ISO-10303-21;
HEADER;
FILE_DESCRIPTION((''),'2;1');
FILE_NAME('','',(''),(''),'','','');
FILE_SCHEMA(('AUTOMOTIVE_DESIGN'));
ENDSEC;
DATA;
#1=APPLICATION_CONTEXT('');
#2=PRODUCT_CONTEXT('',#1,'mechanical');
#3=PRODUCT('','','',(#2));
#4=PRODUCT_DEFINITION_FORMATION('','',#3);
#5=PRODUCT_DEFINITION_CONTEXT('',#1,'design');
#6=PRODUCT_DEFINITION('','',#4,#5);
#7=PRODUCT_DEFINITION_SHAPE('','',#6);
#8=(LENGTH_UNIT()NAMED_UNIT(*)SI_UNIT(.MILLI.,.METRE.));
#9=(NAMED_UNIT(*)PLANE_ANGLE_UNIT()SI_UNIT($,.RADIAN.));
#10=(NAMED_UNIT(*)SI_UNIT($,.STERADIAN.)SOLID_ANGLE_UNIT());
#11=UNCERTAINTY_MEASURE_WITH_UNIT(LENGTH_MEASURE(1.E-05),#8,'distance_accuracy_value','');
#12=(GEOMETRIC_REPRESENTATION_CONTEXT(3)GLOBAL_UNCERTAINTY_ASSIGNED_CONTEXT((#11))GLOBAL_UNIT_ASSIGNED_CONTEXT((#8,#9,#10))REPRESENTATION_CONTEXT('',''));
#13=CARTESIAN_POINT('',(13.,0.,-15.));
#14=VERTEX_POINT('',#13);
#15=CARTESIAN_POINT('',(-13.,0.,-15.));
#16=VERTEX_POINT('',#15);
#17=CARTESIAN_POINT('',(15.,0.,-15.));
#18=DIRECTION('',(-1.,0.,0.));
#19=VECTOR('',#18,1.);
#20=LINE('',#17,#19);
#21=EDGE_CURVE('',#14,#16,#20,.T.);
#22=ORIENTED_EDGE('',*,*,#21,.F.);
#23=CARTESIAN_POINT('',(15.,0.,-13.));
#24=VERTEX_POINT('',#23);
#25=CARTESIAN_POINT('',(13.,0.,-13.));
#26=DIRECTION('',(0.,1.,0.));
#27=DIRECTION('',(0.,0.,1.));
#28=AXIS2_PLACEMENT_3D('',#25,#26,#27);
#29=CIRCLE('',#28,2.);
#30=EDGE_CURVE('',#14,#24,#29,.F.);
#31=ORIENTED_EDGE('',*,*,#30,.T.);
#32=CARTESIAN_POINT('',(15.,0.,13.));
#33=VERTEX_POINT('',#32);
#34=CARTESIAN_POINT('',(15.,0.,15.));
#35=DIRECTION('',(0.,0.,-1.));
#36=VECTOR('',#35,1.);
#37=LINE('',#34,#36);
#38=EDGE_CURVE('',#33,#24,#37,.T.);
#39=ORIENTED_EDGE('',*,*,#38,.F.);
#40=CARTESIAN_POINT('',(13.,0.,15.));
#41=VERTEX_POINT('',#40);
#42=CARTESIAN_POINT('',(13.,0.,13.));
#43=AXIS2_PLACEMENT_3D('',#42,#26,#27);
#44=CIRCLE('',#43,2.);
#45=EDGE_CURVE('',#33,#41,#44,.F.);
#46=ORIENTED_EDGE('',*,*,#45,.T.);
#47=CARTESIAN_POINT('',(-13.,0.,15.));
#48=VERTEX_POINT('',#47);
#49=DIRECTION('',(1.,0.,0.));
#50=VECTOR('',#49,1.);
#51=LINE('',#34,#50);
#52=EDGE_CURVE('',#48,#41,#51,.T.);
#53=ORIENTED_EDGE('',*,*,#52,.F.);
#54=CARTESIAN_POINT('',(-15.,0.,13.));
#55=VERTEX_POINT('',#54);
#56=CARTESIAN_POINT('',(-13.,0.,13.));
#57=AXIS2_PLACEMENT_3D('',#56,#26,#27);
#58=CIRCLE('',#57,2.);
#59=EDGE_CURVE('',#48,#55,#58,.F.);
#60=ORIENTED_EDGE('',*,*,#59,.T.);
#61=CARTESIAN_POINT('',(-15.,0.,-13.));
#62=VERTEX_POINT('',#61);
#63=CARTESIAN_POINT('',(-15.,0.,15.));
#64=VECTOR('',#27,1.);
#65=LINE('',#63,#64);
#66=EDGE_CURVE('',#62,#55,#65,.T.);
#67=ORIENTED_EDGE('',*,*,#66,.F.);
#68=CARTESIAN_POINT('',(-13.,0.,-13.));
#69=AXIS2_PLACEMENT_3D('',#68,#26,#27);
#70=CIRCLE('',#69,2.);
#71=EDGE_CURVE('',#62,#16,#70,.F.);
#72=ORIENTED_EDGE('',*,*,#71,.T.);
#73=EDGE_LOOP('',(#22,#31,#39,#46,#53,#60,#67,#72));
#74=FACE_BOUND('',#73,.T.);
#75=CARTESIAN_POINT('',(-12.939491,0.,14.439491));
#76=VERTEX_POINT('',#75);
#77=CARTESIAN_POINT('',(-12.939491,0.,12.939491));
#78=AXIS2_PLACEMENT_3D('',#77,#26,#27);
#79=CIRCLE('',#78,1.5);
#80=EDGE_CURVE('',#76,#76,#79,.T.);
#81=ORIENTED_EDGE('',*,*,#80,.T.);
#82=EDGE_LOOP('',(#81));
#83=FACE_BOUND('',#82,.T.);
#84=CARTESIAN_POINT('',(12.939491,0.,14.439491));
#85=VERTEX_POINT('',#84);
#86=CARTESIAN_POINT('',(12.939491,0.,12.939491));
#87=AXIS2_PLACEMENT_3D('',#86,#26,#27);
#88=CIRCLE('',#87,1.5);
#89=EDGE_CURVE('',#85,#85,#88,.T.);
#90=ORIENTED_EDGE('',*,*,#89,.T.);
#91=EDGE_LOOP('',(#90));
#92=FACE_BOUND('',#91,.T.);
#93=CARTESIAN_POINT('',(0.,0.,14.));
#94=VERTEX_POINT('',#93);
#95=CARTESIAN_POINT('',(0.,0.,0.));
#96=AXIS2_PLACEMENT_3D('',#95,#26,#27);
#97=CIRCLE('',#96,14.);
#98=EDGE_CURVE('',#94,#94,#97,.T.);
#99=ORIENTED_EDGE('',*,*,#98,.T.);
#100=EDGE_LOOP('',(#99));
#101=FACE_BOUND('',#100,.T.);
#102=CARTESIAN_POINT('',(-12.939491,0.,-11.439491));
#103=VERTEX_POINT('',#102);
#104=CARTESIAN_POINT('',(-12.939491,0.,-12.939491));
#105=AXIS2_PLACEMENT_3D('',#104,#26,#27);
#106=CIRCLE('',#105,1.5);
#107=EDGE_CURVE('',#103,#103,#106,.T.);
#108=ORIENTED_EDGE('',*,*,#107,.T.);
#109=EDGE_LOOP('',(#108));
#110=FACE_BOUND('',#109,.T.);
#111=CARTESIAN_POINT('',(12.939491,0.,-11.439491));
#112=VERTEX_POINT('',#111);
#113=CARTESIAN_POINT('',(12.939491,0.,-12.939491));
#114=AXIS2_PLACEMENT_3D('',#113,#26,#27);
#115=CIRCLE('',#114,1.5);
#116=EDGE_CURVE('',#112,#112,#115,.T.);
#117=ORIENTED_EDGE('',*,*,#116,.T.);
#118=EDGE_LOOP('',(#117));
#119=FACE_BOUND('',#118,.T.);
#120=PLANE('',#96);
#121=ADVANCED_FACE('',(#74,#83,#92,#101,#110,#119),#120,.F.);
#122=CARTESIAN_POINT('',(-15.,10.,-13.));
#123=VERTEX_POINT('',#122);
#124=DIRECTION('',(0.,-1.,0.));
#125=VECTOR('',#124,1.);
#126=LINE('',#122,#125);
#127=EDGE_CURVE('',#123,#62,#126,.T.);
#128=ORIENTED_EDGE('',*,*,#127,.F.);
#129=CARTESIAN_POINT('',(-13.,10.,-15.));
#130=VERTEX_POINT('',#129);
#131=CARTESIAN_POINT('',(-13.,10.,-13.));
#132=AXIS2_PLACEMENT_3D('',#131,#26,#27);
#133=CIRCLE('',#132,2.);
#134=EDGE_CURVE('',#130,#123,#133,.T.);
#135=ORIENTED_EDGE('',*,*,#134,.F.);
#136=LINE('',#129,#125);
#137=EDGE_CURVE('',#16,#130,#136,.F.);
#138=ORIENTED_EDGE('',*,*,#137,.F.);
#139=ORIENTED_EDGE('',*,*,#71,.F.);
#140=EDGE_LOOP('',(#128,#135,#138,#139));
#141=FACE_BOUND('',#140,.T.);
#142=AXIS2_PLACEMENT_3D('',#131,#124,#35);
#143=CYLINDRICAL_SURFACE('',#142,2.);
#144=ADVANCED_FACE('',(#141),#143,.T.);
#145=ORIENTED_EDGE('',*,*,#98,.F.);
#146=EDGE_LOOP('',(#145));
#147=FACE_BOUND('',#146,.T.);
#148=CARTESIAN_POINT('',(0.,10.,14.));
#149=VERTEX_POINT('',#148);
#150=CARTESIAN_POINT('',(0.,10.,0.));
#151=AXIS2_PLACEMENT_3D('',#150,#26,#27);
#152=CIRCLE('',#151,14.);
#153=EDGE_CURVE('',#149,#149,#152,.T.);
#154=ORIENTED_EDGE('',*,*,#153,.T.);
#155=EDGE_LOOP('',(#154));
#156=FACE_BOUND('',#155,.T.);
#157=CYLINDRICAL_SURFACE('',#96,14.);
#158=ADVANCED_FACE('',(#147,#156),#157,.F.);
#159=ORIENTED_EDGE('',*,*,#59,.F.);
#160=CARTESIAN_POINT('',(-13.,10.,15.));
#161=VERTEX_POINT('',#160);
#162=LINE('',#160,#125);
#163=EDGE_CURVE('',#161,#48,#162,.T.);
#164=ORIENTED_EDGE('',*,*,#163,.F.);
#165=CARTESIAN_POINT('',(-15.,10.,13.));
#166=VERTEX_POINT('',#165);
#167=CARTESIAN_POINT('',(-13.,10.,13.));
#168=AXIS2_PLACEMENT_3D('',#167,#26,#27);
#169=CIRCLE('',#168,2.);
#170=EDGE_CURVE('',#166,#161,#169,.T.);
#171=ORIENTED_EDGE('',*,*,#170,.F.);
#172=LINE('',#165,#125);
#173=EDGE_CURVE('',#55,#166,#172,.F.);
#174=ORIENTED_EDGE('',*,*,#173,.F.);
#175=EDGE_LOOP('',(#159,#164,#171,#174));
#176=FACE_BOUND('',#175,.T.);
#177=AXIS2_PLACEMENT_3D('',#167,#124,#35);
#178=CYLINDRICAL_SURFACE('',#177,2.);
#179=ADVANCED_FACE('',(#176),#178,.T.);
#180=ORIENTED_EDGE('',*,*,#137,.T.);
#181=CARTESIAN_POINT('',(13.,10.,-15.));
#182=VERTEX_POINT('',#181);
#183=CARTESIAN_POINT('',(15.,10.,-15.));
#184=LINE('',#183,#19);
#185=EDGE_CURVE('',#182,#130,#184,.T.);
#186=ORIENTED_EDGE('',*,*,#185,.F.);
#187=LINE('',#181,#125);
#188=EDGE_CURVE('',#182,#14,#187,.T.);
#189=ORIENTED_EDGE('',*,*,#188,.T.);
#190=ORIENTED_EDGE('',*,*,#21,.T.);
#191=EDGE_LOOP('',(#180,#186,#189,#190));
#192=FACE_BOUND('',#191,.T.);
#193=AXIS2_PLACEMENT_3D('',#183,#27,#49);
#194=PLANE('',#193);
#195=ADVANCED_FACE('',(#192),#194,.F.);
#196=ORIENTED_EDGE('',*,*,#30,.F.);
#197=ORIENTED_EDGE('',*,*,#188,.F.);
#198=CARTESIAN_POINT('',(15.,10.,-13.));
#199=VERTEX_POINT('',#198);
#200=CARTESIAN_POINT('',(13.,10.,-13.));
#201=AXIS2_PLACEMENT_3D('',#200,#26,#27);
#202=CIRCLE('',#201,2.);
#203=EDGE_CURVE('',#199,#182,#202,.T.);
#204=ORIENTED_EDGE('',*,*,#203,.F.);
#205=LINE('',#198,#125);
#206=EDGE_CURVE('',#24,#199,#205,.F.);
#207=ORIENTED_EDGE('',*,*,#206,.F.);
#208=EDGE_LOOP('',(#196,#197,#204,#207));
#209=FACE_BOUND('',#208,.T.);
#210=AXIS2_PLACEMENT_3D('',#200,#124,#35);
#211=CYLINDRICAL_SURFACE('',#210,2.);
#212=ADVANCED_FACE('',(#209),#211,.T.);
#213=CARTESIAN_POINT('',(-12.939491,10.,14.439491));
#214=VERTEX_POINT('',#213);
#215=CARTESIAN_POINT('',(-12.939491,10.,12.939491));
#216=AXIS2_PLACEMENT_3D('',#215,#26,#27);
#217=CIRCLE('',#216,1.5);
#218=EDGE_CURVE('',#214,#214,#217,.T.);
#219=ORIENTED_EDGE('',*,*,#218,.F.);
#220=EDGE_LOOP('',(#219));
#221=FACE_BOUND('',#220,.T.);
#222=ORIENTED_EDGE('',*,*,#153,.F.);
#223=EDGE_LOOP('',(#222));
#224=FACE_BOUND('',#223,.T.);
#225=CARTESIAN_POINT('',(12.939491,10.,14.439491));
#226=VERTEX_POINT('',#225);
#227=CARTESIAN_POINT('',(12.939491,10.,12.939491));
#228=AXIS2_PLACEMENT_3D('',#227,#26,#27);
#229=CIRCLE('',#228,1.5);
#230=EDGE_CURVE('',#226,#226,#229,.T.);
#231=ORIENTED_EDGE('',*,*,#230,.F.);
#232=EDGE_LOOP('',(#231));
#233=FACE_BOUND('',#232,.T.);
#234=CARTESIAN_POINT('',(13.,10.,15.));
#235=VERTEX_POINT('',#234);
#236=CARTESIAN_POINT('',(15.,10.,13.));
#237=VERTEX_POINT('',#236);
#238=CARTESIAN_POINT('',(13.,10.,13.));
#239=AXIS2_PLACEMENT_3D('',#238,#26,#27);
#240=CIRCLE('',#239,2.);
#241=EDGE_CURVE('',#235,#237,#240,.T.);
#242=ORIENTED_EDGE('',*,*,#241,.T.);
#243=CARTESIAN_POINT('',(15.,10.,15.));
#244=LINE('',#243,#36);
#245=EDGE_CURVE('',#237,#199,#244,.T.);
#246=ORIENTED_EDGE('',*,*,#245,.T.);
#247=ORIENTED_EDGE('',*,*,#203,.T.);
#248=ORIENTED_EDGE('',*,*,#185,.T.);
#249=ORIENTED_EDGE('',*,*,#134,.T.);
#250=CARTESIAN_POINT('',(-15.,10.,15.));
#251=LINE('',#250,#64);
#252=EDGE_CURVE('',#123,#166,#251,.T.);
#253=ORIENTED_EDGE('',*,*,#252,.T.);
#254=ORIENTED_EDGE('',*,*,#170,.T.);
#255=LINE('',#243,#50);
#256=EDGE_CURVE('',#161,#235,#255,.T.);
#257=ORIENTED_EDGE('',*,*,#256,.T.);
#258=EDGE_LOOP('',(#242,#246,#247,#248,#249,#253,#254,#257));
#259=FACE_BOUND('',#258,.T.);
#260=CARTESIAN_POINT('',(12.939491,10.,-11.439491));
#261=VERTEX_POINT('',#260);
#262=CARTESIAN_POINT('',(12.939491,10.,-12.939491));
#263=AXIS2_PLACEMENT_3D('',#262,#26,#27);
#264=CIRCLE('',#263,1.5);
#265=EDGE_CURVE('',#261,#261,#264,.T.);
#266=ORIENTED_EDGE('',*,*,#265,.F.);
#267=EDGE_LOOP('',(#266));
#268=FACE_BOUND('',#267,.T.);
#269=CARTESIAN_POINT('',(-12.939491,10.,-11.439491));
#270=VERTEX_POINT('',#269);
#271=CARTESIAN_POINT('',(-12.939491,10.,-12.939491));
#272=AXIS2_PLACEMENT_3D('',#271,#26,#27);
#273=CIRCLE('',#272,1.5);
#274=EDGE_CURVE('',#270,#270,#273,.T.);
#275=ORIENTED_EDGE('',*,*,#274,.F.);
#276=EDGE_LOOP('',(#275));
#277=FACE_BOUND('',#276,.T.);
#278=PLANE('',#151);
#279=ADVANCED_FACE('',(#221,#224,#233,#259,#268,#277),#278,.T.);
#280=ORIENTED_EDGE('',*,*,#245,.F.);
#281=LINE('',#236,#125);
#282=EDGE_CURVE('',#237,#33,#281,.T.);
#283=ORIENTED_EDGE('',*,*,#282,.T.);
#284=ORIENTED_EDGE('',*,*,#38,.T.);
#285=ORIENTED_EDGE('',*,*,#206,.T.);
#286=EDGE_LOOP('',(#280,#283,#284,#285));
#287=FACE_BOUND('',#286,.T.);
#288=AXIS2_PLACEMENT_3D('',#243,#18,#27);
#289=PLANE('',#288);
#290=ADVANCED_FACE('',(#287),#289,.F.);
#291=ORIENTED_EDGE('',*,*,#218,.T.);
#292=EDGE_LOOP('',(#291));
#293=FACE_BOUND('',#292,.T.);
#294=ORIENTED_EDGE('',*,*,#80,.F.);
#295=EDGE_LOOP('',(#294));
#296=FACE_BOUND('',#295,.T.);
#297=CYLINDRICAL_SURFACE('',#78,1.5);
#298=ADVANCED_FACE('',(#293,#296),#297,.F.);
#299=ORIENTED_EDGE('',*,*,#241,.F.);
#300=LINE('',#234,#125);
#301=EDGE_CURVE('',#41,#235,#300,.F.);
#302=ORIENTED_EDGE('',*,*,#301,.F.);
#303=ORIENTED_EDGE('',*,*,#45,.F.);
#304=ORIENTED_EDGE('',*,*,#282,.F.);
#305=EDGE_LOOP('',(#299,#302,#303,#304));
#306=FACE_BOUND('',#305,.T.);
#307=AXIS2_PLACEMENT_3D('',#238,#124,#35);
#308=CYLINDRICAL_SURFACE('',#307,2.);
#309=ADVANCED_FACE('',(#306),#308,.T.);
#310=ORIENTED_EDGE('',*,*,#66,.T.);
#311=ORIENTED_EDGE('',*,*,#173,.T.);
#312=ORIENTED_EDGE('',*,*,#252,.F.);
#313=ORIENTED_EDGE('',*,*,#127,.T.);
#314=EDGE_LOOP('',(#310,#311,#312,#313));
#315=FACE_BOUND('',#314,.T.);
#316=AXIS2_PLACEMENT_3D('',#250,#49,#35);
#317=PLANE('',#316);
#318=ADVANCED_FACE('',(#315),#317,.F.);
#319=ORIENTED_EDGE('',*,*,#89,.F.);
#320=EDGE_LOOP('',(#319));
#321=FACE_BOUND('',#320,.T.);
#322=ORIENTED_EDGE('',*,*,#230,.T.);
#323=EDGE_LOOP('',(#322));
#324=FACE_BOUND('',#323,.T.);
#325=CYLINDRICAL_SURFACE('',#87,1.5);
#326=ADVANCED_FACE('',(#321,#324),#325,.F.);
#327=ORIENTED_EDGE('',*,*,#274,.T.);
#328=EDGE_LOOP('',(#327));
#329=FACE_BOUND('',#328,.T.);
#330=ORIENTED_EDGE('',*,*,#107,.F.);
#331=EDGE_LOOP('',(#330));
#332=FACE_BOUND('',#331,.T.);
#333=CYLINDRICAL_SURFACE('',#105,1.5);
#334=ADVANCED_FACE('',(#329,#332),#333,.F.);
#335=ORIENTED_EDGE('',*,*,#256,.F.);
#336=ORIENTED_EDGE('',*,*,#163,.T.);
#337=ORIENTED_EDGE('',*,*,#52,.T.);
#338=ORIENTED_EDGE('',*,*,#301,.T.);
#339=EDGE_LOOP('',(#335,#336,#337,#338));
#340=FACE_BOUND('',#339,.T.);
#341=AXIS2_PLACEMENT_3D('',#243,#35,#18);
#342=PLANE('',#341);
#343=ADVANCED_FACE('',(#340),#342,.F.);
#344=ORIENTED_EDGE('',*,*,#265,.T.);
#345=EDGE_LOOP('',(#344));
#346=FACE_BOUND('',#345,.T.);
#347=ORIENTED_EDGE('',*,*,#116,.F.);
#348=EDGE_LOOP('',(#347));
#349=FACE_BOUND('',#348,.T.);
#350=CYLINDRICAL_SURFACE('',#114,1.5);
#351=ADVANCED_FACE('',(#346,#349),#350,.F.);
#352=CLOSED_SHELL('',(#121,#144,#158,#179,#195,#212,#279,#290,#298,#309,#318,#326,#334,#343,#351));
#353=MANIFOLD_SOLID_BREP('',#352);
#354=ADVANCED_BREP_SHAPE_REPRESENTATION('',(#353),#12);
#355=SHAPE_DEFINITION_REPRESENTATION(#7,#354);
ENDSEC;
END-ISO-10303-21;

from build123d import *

# Parameters (mm, degrees)
SCHIZZO1_W                   = 30
SCHIZZO1_H                   = 30
ESTRUSIONE_ESTRUSIONE1_DEPTH = 10
SCHIZZO2_R                   = 1.5
TAGLIO_ESTRUSIONE1_DEPTH     = 24.452078799
SCHIZZO2_3_R                 = 1.5
TAGLIO_ESTRUSIONE2_DEPTH     = 24.452078799
RACCORDO2_R                  = 2
RACCORDO3_R                  = 2
SCHIZZO3D1_R                 = 14
TAGLIO_ESTRUSIONE4_DEPTH     = 27


with BuildPart() as part:
    # Schizzo1 → Estrusione-Estrusione1 (new body)
    with BuildSketch(Plane(origin=(0, 0, 0), x_dir=(1, 0, 0), z_dir=(0, 1, 0))):
        Rectangle(SCHIZZO1_W, SCHIZZO1_H)
    extrude(amount=ESTRUSIONE_ESTRUSIONE1_DEPTH)

    # Schizzo2 → Taglio-Estrusione1 (cut, through all)
    with BuildSketch(Plane(origin=(0, 10, 0), x_dir=(1, 0, 0), z_dir=(0, 1, 0))):
        with Locations((-12.93949084, 12.93949084)):
            Circle(SCHIZZO2_R)
    extrude(amount=-TAGLIO_ESTRUSIONE1_DEPTH, mode=Mode.SUBTRACT)

    # Schizzo2<3> → Taglio-Estrusione2 (cut, through all)
    with BuildSketch(Plane(origin=(0, 10, 0), x_dir=(1, 0, 0), z_dir=(0, 1, 0))):
        with Locations((12.93949084, -12.93949084)):
            Circle(SCHIZZO2_3_R)
        with Locations((-12.93949084, -12.93949084)):
            Circle(SCHIZZO2_3_R)
        with Locations((12.93949084, 12.93949084)):
            Circle(SCHIZZO2_3_R)
    extrude(amount=-TAGLIO_ESTRUSIONE2_DEPTH, mode=Mode.SUBTRACT)

    # Raccordo2
    raccordo2_edges = [part.edges().sort_by_distance(p)[0] for p in [
        (-15, 5, -15),
    ]]
    fillet(raccordo2_edges, radius=RACCORDO2_R)

    # Raccordo3
    raccordo3_edges = [part.edges().sort_by_distance(p)[0] for p in [
        (15, 5, -15),
        (15, 5, 15),
        (-15, 5, 15),
    ]]
    fillet(raccordo3_edges, radius=RACCORDO3_R)

    # Schizzo3D1 → Taglio-Estrusione4 (cut)
    with BuildSketch(Plane.ZX):
        Circle(SCHIZZO3D1_R)
    extrude(amount=TAGLIO_ESTRUSIONE4_DEPTH, mode=Mode.SUBTRACT)


solid = part.part
